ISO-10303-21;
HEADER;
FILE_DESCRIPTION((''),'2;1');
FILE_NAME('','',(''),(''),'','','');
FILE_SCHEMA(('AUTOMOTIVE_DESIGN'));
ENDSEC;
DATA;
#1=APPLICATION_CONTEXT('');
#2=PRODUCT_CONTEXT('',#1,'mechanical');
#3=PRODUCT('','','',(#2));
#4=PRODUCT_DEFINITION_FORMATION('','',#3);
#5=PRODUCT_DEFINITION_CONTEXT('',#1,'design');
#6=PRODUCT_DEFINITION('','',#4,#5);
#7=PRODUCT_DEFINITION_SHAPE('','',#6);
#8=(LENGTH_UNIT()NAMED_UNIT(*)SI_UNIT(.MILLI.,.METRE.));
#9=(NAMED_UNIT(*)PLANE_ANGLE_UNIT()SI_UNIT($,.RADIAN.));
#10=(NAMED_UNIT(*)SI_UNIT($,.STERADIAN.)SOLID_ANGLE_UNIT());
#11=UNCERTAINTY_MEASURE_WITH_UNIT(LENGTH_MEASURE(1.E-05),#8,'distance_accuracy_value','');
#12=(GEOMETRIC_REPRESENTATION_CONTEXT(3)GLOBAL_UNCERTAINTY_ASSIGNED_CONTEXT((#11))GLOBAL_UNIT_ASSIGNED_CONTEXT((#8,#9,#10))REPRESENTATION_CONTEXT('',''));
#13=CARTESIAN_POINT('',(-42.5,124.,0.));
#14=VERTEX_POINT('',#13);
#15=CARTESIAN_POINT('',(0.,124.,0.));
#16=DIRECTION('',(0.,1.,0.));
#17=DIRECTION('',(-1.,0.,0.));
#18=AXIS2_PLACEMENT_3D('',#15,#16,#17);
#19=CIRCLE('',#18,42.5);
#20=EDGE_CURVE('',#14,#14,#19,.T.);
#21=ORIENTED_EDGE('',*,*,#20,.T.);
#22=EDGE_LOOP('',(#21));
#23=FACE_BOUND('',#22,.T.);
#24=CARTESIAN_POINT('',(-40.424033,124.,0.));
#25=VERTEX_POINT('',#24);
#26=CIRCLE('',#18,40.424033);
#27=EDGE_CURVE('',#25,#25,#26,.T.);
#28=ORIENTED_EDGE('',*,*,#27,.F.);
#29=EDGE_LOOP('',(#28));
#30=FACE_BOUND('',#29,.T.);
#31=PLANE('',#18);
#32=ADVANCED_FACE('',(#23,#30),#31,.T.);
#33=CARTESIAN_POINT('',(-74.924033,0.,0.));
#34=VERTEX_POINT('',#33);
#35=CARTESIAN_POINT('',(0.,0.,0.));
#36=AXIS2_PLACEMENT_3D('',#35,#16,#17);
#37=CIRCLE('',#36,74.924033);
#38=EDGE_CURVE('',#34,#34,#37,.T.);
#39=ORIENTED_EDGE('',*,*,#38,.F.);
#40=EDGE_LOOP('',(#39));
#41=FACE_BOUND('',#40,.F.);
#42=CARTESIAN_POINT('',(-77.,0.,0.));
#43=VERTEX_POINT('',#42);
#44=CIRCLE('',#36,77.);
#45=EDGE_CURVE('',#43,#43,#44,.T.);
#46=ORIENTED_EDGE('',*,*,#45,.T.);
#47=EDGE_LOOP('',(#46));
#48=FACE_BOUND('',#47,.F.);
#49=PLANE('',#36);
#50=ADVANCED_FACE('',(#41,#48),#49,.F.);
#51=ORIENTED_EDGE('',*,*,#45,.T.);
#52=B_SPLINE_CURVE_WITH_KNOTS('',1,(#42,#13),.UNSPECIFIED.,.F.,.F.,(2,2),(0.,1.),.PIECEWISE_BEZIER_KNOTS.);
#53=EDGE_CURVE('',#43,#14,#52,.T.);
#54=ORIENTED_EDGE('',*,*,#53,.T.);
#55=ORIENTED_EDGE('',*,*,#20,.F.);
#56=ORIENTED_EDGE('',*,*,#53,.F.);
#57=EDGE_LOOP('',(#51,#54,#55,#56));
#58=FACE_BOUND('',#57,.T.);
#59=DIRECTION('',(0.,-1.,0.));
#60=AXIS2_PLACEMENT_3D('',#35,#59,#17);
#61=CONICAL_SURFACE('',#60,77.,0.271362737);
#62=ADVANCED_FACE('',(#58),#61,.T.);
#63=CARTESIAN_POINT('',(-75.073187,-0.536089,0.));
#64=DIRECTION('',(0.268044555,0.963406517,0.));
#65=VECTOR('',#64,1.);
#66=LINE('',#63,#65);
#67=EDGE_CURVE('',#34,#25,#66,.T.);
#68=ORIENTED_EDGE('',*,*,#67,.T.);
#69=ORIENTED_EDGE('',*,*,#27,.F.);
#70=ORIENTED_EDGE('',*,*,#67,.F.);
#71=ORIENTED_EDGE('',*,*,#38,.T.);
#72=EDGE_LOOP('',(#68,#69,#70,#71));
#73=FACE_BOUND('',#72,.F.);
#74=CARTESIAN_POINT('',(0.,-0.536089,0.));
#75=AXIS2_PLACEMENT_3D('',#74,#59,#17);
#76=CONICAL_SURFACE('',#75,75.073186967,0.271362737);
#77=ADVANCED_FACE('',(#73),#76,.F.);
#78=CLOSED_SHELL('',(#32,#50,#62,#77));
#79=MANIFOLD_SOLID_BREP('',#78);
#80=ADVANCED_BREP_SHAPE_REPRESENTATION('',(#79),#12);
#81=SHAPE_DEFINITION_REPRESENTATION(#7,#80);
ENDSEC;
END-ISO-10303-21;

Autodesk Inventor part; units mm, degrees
ref_plane "YZ Plane" through (0, 0, 0) normal (1, 0, 0) x (0, 1, 0)
ref_plane "XY Plane" through (0, 0, 0) normal (0, 0, 1) x (1, 0, 0)
sketch "Szkic6" plane through (0, 0, 0) normal (0, 1, 0) x (-1, 0, 0)
  circle A0 centre (0, 0) radius 77
  dimension "d33" = 154
ref_plane "Płaszczyzna konstrukcyjna1" through (0, 124, 0) normal (0, 1, 0) x (-1, 0, 0)
sketch "Szkic7" plane through (0, 124, 0) normal (0, 1, 0) x (-1, 0, 0)
  circle A0 centre (0, 0) radius 42.5
  dimension "d35" = 85
loft "Wyciągnięcie złożone1" add profiles "Szkic6", "Szkic7"
shell "Skorupa1" thickness 2 removed faces 2 at (10.6049, 124, 7.3037) at (-23.2587, 0, 21.3864)
equation "\"d33\" = OD1"
equation "\"d35\" = OD2"
equation "\"d52\" = THK"
equation "\"SzerokośćGięciaPodcięcia\" = Grubość"
equation "\"RozmiarPodcięciaNarożnika\" = 4 * Grubość"
equation "\"PromieńPrzejścia\" = PromieńGięcia"
equation "\"Rozmiar_promienia_Jacobiego\" = PromieńGięcia"
equation "\"Wielk_odstępu\" = Grubość"
equation "\"d2\" = PromieńGięcia"
equation "\"d23\" = PromieńGięcia"
equation "\"OD1\" = 154"
equation "\"OD2\" = 85"
equation "\"L\" = 124"
equation "\"THK\" = 2"
equation "\"d34\" = L"
equation "\"Grubość\" = 1.5"
equation "\"PromieńGięcia\" = 3"
properties part number "Redukcja symetryczna Ø154x85x2 L=124" material "304"
